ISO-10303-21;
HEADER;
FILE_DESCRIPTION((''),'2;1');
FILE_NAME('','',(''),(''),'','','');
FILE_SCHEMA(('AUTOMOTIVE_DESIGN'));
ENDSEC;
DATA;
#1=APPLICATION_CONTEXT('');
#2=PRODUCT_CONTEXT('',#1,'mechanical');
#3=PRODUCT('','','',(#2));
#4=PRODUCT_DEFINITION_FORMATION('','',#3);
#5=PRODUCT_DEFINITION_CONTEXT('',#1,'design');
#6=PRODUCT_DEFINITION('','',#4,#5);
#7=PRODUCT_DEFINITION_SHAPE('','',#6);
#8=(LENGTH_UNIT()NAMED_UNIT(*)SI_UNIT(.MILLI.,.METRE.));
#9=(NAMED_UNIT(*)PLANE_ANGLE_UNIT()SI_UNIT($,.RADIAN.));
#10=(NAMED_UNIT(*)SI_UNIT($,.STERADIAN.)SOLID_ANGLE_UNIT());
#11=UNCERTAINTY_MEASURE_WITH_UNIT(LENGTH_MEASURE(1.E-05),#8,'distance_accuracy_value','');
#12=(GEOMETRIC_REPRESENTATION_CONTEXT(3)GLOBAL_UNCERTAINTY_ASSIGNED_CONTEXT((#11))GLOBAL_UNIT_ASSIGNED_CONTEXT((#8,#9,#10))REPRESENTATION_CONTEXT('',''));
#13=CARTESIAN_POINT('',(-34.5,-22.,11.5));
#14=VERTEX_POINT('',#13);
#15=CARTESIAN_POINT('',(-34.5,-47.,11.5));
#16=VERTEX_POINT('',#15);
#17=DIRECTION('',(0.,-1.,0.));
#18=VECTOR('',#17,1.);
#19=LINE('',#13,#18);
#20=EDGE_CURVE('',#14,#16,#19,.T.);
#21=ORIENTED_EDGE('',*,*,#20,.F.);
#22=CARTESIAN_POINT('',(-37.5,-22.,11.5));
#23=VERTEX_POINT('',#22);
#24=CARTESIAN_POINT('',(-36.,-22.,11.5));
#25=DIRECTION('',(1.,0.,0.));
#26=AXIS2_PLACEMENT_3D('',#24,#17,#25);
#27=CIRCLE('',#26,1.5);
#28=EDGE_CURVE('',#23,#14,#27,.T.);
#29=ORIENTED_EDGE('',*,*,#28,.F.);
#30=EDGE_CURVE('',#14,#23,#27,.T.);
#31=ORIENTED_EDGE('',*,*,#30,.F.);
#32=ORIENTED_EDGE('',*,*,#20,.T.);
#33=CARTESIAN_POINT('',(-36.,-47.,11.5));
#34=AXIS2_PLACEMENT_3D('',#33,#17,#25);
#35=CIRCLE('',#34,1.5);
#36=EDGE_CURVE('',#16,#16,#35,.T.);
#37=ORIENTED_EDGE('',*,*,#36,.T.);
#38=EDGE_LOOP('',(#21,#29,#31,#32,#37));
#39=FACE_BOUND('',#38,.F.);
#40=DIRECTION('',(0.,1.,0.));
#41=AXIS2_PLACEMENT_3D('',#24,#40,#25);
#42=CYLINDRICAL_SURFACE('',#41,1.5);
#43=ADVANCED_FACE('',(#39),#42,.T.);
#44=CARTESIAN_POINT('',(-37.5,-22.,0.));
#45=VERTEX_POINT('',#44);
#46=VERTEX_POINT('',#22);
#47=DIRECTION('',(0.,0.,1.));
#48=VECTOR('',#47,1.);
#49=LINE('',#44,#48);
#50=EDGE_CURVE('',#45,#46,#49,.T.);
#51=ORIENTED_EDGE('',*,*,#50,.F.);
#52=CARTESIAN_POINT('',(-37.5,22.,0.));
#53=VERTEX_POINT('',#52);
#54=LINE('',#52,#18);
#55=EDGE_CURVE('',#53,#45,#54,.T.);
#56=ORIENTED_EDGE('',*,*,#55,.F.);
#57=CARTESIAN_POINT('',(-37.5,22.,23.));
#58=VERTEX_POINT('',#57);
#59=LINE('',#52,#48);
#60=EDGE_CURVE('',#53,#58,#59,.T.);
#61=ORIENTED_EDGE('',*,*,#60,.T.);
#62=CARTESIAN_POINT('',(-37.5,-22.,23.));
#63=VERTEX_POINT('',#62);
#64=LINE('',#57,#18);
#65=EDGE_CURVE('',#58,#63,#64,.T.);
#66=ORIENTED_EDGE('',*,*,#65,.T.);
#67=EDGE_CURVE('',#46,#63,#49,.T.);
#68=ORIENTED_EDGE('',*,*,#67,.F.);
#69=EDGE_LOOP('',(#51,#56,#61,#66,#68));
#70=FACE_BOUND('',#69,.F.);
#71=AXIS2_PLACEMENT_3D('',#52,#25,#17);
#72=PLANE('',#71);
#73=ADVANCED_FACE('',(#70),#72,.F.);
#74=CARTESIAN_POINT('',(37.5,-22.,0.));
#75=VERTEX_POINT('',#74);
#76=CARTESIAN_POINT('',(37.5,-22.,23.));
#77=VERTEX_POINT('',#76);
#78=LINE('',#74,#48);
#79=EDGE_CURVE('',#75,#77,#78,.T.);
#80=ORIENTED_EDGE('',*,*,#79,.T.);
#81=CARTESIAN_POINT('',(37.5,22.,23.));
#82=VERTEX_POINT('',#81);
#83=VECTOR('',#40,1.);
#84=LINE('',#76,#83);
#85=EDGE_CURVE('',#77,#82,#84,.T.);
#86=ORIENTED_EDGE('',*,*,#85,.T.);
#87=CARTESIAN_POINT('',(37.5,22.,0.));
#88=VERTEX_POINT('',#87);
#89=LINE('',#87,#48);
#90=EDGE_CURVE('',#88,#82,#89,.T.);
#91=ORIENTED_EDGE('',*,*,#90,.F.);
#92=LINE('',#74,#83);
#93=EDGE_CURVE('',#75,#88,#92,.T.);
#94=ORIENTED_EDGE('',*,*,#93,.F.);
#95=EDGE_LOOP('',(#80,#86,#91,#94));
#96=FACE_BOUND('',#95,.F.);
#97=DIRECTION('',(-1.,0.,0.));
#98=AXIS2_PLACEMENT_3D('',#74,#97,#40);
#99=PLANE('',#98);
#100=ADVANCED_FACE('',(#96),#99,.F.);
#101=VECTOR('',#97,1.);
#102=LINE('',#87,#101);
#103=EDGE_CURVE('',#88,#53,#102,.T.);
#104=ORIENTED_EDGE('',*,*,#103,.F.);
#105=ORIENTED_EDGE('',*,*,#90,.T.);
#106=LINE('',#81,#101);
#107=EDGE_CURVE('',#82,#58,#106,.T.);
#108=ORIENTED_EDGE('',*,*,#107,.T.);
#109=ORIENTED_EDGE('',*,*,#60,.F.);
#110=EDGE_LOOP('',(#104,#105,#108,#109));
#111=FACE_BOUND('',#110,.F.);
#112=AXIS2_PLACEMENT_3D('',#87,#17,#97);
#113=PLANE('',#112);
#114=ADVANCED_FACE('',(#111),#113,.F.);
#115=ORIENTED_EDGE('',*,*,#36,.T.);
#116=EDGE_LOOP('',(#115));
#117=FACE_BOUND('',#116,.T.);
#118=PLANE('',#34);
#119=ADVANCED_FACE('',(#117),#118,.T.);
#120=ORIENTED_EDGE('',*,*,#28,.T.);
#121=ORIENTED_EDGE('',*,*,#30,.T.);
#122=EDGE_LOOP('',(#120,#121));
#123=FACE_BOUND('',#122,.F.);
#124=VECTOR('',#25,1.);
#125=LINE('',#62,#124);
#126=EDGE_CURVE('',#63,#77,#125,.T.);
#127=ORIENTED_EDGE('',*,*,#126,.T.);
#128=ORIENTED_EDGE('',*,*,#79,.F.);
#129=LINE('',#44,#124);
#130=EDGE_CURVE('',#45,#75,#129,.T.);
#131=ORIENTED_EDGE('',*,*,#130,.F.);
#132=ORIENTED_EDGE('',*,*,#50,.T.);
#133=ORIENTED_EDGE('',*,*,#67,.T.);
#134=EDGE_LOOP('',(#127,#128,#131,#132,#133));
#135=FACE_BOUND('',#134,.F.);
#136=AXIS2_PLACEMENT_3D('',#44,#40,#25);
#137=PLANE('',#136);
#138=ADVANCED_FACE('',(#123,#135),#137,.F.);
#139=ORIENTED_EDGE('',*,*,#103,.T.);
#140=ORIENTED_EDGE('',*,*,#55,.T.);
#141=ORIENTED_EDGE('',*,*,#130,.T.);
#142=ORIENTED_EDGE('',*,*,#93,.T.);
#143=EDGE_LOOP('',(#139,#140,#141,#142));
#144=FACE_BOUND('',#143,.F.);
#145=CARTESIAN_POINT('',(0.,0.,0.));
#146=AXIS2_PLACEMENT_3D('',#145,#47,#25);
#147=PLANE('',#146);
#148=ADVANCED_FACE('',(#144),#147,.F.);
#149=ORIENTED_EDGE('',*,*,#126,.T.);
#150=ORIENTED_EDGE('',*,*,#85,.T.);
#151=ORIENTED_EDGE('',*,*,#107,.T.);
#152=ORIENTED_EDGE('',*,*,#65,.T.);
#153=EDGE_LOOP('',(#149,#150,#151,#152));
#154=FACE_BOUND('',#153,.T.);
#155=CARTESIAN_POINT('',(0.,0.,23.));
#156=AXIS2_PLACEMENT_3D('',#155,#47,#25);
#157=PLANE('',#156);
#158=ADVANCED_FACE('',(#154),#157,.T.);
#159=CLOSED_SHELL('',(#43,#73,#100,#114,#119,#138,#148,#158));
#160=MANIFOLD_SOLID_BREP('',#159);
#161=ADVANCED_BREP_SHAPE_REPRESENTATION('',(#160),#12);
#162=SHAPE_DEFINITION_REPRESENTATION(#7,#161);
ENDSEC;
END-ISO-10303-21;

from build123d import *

# Parameters (mm, degrees)
F1_DEPTH = 23
F3_DEPTH = 25


# Not quite as in the source:
# - the program builds the solid bodies; features that only make, move or delete a surface that nothing else refers to are left out


with BuildPart() as f1:
    # F0 (on Top) → F1 (new body)
    with BuildSketch(Plane.XY):
        Polygon((-37.5, 22), (-37.5, -22), (-15.1, -22), (37.5, -22), (37.5, 22), (-15.1, 22), align=None)
    extrude(amount=F1_DEPTH)

    # F2 (on face) → F3 (join)
    with BuildSketch(Plane.XZ.offset(22)):
        with BuildLine():
            ThreePointArc((-37.5, 11.5), (-36, 10), (-34.5, 11.5))
            ThreePointArc((-34.5, 11.5), (-36, 13), (-37.5, 11.5))
        make_face()
    extrude(amount=F3_DEPTH)


solid = f1.part
